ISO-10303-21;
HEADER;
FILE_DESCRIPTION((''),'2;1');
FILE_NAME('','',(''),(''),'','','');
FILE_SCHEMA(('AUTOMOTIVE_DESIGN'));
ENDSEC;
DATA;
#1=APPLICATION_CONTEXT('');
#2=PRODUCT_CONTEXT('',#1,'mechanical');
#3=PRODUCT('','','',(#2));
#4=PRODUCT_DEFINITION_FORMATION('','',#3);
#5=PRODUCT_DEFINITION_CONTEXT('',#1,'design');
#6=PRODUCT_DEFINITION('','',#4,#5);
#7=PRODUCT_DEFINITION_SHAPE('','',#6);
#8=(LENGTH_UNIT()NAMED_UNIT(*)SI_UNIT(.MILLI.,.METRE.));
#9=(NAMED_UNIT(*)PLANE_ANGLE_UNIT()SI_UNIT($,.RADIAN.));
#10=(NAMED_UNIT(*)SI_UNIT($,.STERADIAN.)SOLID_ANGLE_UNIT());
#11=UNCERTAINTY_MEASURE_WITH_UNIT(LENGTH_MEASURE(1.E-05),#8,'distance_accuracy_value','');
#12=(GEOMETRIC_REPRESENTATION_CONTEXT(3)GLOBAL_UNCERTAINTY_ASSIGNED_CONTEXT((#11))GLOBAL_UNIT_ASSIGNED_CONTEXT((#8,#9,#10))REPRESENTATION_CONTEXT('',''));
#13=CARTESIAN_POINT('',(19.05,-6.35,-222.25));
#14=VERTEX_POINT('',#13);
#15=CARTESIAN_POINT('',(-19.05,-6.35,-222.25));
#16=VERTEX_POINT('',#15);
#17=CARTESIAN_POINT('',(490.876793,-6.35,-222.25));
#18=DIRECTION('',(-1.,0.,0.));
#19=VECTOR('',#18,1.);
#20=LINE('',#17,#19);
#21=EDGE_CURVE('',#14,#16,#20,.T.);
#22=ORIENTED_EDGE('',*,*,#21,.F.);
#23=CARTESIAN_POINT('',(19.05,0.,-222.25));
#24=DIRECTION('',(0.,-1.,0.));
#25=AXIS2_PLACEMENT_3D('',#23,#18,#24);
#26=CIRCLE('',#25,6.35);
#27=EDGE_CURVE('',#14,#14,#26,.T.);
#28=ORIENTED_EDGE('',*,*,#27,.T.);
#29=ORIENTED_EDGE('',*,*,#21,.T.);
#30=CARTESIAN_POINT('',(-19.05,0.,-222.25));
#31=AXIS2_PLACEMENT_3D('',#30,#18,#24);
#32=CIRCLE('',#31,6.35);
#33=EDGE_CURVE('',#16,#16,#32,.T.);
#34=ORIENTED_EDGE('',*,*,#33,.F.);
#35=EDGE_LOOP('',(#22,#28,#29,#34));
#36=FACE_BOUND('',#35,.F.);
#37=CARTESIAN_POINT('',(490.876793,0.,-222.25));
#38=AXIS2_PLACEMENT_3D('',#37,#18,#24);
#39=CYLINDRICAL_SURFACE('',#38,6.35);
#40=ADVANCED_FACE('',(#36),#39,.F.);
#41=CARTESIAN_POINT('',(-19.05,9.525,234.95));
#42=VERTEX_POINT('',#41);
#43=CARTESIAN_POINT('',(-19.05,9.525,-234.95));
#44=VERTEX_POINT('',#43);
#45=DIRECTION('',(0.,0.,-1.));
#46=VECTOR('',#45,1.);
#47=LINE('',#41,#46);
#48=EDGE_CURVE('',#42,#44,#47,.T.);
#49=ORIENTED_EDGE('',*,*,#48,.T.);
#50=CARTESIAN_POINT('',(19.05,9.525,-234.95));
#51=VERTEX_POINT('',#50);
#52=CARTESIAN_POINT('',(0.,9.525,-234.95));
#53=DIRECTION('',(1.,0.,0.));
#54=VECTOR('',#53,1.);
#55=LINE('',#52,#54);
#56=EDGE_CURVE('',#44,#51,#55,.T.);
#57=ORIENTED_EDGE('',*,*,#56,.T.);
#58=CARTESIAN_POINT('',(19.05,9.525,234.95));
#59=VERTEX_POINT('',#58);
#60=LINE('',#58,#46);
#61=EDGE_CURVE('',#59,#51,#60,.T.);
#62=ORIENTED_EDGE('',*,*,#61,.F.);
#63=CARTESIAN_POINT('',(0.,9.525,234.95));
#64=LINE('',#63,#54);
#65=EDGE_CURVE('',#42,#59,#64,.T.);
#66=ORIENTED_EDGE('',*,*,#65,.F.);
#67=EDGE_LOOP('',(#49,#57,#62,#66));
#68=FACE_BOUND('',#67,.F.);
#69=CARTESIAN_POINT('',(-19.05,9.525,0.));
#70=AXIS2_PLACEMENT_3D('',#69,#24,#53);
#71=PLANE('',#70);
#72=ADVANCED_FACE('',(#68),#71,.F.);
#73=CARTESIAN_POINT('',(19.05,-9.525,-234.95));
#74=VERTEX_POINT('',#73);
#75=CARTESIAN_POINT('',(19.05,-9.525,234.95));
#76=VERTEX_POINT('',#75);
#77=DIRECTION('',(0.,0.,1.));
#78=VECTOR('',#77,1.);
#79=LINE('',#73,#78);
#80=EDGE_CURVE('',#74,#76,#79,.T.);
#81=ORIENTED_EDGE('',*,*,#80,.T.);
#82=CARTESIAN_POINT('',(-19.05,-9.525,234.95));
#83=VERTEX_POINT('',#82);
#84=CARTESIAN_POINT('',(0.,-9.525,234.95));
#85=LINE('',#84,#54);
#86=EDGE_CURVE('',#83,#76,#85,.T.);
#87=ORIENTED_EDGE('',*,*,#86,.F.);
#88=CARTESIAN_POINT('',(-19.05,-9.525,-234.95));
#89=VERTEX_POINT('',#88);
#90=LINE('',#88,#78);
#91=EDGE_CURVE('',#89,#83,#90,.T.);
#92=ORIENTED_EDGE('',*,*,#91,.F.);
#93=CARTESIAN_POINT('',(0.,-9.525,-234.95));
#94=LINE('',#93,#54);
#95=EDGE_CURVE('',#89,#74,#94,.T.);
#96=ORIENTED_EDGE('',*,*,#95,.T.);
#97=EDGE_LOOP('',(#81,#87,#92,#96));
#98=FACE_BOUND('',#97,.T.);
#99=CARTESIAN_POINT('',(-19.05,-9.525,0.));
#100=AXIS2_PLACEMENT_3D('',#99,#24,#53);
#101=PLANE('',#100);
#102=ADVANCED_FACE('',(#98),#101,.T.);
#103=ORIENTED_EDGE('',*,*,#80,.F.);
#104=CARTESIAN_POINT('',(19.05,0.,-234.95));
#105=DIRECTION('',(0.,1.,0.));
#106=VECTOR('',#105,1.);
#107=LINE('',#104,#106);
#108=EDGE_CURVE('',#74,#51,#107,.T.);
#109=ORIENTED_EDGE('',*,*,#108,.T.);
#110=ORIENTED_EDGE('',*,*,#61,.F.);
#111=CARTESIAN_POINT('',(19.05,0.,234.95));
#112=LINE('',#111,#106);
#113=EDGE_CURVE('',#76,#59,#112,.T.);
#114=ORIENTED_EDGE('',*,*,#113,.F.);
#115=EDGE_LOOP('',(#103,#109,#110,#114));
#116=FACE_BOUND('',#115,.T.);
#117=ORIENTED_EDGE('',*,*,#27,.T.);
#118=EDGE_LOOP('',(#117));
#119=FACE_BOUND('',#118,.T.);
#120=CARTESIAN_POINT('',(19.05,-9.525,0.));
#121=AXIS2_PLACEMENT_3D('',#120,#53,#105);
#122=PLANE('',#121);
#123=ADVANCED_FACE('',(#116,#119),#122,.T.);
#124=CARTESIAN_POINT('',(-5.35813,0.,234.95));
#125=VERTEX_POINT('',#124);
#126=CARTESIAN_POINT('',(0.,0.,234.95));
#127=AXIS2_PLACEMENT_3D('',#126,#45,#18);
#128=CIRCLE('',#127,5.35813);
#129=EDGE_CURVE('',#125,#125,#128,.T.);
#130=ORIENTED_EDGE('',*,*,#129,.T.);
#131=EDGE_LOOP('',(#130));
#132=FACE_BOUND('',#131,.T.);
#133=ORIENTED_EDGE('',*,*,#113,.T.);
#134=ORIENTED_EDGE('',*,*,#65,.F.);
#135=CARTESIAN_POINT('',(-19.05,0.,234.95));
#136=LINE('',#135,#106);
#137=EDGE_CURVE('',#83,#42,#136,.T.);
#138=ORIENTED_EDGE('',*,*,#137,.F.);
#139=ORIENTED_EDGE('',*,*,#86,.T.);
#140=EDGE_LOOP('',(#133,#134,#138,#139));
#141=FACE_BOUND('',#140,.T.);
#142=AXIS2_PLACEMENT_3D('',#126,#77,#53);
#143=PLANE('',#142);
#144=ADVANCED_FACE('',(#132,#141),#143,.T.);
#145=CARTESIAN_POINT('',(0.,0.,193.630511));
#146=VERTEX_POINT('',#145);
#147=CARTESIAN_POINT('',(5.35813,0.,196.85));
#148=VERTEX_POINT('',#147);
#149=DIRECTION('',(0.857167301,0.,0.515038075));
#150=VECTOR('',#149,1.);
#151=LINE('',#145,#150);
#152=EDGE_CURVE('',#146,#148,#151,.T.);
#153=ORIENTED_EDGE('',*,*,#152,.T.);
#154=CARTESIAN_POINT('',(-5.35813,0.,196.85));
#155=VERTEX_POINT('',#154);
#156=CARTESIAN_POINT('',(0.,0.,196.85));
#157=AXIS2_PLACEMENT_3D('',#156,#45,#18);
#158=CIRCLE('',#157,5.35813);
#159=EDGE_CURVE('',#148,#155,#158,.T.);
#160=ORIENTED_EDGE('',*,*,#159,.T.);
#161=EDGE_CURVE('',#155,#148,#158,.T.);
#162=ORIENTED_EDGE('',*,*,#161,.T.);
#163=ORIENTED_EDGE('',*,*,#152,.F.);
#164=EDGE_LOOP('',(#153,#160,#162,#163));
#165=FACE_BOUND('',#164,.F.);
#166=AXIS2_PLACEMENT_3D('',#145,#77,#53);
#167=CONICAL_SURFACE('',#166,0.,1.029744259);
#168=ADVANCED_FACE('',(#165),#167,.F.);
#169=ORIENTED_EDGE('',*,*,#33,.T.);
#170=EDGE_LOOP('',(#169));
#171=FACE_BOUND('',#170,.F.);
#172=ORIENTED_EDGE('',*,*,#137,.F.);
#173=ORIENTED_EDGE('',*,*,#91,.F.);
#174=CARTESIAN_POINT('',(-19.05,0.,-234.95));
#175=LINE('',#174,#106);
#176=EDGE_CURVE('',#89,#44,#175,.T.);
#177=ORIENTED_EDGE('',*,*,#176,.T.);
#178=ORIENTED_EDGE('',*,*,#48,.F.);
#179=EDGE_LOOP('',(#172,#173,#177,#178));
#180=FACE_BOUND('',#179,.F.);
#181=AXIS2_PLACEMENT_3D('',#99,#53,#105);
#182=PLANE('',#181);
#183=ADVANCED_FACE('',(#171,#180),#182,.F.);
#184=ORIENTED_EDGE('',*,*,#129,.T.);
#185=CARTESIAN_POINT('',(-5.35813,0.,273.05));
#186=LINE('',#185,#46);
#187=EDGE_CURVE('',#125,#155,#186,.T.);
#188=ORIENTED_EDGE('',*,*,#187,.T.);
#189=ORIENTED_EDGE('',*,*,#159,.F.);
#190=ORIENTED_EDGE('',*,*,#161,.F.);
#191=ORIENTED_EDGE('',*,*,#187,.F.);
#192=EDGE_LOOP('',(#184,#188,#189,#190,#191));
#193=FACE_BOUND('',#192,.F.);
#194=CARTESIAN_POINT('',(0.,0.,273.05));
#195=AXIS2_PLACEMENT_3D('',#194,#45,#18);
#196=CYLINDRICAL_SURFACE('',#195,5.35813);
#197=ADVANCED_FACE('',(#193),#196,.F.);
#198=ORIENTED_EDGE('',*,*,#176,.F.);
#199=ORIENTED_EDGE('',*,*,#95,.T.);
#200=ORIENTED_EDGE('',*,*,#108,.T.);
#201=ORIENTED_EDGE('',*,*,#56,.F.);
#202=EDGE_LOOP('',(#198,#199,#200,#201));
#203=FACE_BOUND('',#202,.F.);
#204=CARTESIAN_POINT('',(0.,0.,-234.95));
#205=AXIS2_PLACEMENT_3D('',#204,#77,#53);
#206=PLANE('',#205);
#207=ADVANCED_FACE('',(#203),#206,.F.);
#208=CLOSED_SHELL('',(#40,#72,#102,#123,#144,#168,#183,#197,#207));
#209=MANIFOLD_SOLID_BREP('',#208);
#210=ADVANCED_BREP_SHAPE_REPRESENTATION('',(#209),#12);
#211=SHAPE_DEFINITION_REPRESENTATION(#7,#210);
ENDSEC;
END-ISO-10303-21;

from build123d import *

# Parameters (mm, degrees)
F0_W     = 38.1
F0_H     = 19.05
F1_DEPTH = 234.95
F3_D     = 12.7
F5_D     = 10.71626
F5_DEPTH = 38.1
F5_TIP   = 3.2194893086


# Not quite as in the source:
# - a length typed as a fraction of an inch, garbled in the dataset ("3 / 203.2 mm" for 3/8 in), is restored


with BuildPart() as f1:
    # F0 (on Top) → F1 (new body, symmetric)
    with BuildSketch(Plane.XY):
        Rectangle(F0_W, F0_H)
    extrude(amount=F1_DEPTH, both=True)

    # F3 (through all)
    with Locations(Plane.YZ.offset(19.05)):
        with Locations((0, -222.25)):
            Hole(F3_D / 2)

    # F5
    with Locations(Plane.XY.offset(234.95)):
        with Locations((0, 0)):
            Hole(F5_D / 2, depth=F5_DEPTH)
            with Locations((0, 0, -(F5_DEPTH + F5_TIP / 2))):  # 118° drill point
                Cone(0, F5_D / 2, F5_TIP, mode=Mode.SUBTRACT)


solid = f1.part
